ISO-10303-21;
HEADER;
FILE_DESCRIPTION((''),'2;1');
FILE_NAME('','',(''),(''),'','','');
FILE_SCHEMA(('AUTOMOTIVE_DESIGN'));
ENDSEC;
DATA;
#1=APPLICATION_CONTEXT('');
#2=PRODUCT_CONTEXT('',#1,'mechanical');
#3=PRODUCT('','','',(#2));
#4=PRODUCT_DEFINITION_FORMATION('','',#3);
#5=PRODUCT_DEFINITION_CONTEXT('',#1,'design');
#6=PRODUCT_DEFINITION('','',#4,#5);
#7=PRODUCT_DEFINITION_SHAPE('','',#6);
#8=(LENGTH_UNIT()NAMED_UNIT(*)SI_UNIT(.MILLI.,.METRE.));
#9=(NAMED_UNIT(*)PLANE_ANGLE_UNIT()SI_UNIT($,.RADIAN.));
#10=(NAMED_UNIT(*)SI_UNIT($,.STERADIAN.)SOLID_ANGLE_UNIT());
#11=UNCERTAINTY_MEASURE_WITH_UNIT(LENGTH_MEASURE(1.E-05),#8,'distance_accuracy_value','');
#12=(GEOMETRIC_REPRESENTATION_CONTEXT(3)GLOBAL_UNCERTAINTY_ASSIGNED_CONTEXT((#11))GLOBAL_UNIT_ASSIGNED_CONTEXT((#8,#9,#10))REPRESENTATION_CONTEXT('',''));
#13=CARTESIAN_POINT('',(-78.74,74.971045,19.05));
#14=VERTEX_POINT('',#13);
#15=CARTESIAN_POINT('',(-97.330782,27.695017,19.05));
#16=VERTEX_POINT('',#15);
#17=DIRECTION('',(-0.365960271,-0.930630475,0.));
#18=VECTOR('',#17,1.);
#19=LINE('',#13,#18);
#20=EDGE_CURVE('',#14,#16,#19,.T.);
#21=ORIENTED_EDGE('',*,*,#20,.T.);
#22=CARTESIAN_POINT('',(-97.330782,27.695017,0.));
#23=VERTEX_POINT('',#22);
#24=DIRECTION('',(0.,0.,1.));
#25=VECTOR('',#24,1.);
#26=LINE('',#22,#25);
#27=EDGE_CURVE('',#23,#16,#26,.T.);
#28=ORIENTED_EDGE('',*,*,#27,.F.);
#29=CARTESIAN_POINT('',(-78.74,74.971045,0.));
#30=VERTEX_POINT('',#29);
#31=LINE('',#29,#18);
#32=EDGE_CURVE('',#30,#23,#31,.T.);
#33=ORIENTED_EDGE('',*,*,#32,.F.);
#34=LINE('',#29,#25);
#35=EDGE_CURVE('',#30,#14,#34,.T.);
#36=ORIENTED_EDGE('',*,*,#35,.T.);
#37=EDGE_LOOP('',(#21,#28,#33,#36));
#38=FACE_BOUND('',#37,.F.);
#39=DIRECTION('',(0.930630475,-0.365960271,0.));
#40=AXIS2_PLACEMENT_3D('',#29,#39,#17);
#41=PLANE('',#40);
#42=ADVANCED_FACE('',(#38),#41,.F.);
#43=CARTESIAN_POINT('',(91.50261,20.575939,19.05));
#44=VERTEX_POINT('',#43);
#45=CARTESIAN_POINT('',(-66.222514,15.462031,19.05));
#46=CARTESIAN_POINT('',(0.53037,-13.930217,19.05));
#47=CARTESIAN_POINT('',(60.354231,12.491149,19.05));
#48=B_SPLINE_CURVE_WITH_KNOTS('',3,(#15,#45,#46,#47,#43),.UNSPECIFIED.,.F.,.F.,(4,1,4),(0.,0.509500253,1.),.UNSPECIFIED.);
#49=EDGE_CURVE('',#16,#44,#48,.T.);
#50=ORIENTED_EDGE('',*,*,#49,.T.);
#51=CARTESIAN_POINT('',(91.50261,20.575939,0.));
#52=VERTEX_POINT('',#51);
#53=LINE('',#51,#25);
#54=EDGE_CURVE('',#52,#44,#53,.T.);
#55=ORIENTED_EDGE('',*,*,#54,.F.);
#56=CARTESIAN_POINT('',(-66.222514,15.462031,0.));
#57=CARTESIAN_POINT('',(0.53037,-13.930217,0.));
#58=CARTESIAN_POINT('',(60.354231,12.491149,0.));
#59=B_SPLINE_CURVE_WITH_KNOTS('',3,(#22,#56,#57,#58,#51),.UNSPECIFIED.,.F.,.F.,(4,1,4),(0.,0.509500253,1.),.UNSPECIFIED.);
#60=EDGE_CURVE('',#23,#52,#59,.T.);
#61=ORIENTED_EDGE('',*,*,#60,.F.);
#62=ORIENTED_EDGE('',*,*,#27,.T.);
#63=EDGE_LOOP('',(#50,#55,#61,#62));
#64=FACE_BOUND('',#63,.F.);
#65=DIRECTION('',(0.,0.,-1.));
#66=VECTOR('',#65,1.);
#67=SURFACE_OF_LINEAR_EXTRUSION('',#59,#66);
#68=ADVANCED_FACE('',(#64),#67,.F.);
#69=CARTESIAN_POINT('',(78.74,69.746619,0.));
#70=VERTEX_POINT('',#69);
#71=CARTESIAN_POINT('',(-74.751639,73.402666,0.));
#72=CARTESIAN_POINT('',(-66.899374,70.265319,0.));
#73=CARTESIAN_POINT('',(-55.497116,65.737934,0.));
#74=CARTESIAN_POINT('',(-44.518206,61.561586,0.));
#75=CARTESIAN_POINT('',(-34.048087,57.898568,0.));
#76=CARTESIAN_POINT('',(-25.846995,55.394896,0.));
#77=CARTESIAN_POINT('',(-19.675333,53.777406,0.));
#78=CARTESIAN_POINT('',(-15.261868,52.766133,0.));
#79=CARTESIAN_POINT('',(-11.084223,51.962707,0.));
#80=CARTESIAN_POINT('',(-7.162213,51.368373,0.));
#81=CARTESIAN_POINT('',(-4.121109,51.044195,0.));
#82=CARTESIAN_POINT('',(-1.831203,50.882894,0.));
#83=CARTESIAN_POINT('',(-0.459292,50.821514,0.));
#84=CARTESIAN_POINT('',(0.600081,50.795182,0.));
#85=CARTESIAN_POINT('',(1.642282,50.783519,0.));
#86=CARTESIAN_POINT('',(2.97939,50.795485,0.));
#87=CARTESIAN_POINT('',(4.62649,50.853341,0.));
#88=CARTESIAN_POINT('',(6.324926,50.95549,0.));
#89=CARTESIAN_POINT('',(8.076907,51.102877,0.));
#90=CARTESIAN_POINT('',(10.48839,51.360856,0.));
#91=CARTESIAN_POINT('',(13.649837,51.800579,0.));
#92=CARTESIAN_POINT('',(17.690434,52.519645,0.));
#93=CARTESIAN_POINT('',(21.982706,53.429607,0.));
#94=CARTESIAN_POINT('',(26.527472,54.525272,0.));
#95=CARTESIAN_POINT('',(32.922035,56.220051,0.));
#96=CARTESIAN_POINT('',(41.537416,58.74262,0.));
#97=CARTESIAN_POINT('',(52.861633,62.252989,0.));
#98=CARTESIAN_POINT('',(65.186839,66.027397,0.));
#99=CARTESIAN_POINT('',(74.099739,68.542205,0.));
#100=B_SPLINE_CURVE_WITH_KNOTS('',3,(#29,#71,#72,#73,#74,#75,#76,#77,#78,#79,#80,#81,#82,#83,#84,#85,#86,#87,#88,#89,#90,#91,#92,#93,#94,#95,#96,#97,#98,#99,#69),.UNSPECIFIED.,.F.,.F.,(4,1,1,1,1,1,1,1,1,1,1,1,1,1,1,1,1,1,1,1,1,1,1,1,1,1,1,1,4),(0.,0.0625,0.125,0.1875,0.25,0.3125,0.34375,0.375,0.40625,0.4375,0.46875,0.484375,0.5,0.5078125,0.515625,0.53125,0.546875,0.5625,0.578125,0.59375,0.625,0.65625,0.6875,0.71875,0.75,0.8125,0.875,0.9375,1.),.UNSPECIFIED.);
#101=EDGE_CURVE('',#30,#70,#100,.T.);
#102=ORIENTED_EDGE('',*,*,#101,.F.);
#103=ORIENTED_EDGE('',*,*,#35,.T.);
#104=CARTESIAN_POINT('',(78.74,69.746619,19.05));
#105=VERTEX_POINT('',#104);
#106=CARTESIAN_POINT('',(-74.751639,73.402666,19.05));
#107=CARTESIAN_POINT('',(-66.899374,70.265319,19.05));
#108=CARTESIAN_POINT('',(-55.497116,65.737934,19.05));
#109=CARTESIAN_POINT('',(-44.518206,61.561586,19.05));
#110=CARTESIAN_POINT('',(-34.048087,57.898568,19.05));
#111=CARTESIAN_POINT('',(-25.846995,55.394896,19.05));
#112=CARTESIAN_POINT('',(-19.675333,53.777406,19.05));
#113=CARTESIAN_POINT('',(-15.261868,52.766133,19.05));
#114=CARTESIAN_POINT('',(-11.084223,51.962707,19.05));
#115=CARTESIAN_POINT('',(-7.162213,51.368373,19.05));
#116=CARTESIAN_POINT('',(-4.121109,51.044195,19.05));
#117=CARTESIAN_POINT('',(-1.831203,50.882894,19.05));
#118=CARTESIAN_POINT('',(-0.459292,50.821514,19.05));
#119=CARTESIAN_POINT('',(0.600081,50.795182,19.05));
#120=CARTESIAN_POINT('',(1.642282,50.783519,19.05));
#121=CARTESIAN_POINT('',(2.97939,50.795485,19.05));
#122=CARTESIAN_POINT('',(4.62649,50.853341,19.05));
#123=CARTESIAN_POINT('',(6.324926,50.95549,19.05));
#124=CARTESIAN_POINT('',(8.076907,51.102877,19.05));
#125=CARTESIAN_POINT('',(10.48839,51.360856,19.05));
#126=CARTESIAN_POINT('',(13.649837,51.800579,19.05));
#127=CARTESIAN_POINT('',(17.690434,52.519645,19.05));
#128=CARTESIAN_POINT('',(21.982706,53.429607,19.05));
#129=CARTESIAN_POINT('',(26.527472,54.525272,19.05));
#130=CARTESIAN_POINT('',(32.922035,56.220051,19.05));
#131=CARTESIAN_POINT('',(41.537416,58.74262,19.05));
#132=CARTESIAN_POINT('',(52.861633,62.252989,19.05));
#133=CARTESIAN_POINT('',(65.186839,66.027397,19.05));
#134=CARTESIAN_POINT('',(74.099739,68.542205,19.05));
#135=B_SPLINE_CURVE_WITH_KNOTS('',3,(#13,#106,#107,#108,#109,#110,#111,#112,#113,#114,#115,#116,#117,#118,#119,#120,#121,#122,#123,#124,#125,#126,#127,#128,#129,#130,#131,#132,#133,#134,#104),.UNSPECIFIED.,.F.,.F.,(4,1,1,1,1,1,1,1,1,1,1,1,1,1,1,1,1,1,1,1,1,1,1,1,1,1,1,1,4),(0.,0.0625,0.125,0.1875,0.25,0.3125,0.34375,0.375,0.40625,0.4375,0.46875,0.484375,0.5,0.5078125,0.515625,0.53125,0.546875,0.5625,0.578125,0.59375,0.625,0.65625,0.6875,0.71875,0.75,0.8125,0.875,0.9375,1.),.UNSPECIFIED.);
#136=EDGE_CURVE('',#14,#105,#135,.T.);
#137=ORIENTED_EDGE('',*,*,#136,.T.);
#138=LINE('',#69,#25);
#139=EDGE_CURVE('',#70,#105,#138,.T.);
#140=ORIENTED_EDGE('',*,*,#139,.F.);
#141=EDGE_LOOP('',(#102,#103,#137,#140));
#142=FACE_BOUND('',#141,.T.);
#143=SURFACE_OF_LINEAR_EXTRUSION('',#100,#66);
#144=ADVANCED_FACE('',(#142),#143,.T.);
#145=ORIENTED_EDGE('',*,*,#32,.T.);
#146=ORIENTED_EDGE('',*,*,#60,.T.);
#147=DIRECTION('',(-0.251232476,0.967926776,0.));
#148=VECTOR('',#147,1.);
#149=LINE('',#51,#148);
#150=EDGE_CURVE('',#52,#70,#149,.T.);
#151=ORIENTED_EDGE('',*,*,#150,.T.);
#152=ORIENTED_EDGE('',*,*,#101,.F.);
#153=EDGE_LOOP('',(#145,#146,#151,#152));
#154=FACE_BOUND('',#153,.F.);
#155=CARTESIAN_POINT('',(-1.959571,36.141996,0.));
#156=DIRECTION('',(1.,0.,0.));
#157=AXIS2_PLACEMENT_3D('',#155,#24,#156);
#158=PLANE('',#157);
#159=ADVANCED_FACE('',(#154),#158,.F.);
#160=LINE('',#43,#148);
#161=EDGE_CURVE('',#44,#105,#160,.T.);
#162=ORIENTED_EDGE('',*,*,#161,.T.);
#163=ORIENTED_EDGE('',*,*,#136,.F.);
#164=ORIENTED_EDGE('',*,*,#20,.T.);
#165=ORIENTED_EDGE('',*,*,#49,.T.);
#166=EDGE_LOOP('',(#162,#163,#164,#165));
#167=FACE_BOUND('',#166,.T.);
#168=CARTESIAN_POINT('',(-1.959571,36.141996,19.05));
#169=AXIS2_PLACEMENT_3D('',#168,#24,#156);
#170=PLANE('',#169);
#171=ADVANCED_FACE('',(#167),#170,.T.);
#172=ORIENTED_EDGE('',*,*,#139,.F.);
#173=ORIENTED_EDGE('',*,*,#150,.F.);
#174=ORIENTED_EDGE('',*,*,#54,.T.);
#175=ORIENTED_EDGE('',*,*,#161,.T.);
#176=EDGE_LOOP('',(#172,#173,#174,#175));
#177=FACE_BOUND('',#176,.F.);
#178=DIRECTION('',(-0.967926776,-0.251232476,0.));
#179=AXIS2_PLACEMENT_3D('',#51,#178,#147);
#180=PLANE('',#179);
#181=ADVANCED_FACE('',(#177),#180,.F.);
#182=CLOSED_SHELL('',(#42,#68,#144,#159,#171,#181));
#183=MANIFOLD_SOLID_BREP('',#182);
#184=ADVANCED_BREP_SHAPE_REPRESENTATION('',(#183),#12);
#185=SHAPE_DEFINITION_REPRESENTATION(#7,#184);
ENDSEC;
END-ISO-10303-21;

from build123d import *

# Parameters (mm, degrees)
F1_DEPTH = 19.05


# Not quite as in the source:
# - the dataset's text gives a spline's control points without its knots; the knots are read off the source's solid


with BuildPart() as f1:
    # F0 (on Top) → F1 (new body)
    with BuildSketch(Plane.XY):
        with BuildLine():
            Line((-78.7400000139, 74.9710454241), (-97.3307817617, 27.6950173125))
            add(Edge.make_bspline(
                [(-97.3307817617, 27.6950173125), (-66.2225142701, 15.4620308585), (0.5303698628, -13.9302166383), (60.3542314066, 12.4911491454), (91.5026097765, 20.5759386309)],
                knots=[0, 0, 0, 0, 0.5095002534, 1, 1, 1, 1], degree=3))
            Line((91.5026097765, 20.5759386309), (78.74, 69.7466188346))
            add(Edge.make_bspline(
                [(-78.7400000139, 74.9710454241), (-74.751639175, 73.4026660815), (-66.8993742503, 70.2653188702), (-55.4971155584, 65.7379336533), (-44.5182059311, 61.5615862051), (-34.0480869505, 57.8985675644), (-25.8469948752, 55.3948961673), (-19.6753333366, 53.7774059809), (-15.2618679349, 52.7661333276), (-11.084222746, 51.9627067048), (-7.1622127924, 51.3683727178), (-4.121108692, 51.0441951948), (-1.8312034682, 50.8828940784), (-0.4592915947, 50.8215137555), (0.6000811821, 50.7951820381), (1.6422815166, 50.7835190193), (2.9793902335, 50.7954852513), (4.6264900218, 50.8533409822), (6.3249262074, 50.9554896058), (8.076907396, 51.1028768126), (10.4883899189, 51.3608560651), (13.6498371919, 51.8005785667), (17.6904338769, 52.5196453595), (21.9827064774, 53.4296073156), (26.5274721813, 54.5252716267), (32.9220353822, 56.2200505467), (41.5374163561, 58.7426199425), (52.8616329275, 62.2529894112), (65.1868389817, 66.0273969194), (74.0997387513, 68.5422050796), (78.74, 69.7466188346)],
                knots=[0, 0, 0, 0, 0.0625, 0.125, 0.1875, 0.25, 0.3125, 0.34375, 0.375, 0.40625, 0.4375, 0.46875, 0.484375, 0.5, 0.5078125, 0.515625, 0.53125, 0.546875, 0.5625, 0.578125, 0.59375, 0.625, 0.65625, 0.6875, 0.71875, 0.75, 0.8125, 0.875, 0.9375, 1, 1, 1, 1], degree=3))
        make_face()
    extrude(amount=F1_DEPTH)


solid = f1.part
